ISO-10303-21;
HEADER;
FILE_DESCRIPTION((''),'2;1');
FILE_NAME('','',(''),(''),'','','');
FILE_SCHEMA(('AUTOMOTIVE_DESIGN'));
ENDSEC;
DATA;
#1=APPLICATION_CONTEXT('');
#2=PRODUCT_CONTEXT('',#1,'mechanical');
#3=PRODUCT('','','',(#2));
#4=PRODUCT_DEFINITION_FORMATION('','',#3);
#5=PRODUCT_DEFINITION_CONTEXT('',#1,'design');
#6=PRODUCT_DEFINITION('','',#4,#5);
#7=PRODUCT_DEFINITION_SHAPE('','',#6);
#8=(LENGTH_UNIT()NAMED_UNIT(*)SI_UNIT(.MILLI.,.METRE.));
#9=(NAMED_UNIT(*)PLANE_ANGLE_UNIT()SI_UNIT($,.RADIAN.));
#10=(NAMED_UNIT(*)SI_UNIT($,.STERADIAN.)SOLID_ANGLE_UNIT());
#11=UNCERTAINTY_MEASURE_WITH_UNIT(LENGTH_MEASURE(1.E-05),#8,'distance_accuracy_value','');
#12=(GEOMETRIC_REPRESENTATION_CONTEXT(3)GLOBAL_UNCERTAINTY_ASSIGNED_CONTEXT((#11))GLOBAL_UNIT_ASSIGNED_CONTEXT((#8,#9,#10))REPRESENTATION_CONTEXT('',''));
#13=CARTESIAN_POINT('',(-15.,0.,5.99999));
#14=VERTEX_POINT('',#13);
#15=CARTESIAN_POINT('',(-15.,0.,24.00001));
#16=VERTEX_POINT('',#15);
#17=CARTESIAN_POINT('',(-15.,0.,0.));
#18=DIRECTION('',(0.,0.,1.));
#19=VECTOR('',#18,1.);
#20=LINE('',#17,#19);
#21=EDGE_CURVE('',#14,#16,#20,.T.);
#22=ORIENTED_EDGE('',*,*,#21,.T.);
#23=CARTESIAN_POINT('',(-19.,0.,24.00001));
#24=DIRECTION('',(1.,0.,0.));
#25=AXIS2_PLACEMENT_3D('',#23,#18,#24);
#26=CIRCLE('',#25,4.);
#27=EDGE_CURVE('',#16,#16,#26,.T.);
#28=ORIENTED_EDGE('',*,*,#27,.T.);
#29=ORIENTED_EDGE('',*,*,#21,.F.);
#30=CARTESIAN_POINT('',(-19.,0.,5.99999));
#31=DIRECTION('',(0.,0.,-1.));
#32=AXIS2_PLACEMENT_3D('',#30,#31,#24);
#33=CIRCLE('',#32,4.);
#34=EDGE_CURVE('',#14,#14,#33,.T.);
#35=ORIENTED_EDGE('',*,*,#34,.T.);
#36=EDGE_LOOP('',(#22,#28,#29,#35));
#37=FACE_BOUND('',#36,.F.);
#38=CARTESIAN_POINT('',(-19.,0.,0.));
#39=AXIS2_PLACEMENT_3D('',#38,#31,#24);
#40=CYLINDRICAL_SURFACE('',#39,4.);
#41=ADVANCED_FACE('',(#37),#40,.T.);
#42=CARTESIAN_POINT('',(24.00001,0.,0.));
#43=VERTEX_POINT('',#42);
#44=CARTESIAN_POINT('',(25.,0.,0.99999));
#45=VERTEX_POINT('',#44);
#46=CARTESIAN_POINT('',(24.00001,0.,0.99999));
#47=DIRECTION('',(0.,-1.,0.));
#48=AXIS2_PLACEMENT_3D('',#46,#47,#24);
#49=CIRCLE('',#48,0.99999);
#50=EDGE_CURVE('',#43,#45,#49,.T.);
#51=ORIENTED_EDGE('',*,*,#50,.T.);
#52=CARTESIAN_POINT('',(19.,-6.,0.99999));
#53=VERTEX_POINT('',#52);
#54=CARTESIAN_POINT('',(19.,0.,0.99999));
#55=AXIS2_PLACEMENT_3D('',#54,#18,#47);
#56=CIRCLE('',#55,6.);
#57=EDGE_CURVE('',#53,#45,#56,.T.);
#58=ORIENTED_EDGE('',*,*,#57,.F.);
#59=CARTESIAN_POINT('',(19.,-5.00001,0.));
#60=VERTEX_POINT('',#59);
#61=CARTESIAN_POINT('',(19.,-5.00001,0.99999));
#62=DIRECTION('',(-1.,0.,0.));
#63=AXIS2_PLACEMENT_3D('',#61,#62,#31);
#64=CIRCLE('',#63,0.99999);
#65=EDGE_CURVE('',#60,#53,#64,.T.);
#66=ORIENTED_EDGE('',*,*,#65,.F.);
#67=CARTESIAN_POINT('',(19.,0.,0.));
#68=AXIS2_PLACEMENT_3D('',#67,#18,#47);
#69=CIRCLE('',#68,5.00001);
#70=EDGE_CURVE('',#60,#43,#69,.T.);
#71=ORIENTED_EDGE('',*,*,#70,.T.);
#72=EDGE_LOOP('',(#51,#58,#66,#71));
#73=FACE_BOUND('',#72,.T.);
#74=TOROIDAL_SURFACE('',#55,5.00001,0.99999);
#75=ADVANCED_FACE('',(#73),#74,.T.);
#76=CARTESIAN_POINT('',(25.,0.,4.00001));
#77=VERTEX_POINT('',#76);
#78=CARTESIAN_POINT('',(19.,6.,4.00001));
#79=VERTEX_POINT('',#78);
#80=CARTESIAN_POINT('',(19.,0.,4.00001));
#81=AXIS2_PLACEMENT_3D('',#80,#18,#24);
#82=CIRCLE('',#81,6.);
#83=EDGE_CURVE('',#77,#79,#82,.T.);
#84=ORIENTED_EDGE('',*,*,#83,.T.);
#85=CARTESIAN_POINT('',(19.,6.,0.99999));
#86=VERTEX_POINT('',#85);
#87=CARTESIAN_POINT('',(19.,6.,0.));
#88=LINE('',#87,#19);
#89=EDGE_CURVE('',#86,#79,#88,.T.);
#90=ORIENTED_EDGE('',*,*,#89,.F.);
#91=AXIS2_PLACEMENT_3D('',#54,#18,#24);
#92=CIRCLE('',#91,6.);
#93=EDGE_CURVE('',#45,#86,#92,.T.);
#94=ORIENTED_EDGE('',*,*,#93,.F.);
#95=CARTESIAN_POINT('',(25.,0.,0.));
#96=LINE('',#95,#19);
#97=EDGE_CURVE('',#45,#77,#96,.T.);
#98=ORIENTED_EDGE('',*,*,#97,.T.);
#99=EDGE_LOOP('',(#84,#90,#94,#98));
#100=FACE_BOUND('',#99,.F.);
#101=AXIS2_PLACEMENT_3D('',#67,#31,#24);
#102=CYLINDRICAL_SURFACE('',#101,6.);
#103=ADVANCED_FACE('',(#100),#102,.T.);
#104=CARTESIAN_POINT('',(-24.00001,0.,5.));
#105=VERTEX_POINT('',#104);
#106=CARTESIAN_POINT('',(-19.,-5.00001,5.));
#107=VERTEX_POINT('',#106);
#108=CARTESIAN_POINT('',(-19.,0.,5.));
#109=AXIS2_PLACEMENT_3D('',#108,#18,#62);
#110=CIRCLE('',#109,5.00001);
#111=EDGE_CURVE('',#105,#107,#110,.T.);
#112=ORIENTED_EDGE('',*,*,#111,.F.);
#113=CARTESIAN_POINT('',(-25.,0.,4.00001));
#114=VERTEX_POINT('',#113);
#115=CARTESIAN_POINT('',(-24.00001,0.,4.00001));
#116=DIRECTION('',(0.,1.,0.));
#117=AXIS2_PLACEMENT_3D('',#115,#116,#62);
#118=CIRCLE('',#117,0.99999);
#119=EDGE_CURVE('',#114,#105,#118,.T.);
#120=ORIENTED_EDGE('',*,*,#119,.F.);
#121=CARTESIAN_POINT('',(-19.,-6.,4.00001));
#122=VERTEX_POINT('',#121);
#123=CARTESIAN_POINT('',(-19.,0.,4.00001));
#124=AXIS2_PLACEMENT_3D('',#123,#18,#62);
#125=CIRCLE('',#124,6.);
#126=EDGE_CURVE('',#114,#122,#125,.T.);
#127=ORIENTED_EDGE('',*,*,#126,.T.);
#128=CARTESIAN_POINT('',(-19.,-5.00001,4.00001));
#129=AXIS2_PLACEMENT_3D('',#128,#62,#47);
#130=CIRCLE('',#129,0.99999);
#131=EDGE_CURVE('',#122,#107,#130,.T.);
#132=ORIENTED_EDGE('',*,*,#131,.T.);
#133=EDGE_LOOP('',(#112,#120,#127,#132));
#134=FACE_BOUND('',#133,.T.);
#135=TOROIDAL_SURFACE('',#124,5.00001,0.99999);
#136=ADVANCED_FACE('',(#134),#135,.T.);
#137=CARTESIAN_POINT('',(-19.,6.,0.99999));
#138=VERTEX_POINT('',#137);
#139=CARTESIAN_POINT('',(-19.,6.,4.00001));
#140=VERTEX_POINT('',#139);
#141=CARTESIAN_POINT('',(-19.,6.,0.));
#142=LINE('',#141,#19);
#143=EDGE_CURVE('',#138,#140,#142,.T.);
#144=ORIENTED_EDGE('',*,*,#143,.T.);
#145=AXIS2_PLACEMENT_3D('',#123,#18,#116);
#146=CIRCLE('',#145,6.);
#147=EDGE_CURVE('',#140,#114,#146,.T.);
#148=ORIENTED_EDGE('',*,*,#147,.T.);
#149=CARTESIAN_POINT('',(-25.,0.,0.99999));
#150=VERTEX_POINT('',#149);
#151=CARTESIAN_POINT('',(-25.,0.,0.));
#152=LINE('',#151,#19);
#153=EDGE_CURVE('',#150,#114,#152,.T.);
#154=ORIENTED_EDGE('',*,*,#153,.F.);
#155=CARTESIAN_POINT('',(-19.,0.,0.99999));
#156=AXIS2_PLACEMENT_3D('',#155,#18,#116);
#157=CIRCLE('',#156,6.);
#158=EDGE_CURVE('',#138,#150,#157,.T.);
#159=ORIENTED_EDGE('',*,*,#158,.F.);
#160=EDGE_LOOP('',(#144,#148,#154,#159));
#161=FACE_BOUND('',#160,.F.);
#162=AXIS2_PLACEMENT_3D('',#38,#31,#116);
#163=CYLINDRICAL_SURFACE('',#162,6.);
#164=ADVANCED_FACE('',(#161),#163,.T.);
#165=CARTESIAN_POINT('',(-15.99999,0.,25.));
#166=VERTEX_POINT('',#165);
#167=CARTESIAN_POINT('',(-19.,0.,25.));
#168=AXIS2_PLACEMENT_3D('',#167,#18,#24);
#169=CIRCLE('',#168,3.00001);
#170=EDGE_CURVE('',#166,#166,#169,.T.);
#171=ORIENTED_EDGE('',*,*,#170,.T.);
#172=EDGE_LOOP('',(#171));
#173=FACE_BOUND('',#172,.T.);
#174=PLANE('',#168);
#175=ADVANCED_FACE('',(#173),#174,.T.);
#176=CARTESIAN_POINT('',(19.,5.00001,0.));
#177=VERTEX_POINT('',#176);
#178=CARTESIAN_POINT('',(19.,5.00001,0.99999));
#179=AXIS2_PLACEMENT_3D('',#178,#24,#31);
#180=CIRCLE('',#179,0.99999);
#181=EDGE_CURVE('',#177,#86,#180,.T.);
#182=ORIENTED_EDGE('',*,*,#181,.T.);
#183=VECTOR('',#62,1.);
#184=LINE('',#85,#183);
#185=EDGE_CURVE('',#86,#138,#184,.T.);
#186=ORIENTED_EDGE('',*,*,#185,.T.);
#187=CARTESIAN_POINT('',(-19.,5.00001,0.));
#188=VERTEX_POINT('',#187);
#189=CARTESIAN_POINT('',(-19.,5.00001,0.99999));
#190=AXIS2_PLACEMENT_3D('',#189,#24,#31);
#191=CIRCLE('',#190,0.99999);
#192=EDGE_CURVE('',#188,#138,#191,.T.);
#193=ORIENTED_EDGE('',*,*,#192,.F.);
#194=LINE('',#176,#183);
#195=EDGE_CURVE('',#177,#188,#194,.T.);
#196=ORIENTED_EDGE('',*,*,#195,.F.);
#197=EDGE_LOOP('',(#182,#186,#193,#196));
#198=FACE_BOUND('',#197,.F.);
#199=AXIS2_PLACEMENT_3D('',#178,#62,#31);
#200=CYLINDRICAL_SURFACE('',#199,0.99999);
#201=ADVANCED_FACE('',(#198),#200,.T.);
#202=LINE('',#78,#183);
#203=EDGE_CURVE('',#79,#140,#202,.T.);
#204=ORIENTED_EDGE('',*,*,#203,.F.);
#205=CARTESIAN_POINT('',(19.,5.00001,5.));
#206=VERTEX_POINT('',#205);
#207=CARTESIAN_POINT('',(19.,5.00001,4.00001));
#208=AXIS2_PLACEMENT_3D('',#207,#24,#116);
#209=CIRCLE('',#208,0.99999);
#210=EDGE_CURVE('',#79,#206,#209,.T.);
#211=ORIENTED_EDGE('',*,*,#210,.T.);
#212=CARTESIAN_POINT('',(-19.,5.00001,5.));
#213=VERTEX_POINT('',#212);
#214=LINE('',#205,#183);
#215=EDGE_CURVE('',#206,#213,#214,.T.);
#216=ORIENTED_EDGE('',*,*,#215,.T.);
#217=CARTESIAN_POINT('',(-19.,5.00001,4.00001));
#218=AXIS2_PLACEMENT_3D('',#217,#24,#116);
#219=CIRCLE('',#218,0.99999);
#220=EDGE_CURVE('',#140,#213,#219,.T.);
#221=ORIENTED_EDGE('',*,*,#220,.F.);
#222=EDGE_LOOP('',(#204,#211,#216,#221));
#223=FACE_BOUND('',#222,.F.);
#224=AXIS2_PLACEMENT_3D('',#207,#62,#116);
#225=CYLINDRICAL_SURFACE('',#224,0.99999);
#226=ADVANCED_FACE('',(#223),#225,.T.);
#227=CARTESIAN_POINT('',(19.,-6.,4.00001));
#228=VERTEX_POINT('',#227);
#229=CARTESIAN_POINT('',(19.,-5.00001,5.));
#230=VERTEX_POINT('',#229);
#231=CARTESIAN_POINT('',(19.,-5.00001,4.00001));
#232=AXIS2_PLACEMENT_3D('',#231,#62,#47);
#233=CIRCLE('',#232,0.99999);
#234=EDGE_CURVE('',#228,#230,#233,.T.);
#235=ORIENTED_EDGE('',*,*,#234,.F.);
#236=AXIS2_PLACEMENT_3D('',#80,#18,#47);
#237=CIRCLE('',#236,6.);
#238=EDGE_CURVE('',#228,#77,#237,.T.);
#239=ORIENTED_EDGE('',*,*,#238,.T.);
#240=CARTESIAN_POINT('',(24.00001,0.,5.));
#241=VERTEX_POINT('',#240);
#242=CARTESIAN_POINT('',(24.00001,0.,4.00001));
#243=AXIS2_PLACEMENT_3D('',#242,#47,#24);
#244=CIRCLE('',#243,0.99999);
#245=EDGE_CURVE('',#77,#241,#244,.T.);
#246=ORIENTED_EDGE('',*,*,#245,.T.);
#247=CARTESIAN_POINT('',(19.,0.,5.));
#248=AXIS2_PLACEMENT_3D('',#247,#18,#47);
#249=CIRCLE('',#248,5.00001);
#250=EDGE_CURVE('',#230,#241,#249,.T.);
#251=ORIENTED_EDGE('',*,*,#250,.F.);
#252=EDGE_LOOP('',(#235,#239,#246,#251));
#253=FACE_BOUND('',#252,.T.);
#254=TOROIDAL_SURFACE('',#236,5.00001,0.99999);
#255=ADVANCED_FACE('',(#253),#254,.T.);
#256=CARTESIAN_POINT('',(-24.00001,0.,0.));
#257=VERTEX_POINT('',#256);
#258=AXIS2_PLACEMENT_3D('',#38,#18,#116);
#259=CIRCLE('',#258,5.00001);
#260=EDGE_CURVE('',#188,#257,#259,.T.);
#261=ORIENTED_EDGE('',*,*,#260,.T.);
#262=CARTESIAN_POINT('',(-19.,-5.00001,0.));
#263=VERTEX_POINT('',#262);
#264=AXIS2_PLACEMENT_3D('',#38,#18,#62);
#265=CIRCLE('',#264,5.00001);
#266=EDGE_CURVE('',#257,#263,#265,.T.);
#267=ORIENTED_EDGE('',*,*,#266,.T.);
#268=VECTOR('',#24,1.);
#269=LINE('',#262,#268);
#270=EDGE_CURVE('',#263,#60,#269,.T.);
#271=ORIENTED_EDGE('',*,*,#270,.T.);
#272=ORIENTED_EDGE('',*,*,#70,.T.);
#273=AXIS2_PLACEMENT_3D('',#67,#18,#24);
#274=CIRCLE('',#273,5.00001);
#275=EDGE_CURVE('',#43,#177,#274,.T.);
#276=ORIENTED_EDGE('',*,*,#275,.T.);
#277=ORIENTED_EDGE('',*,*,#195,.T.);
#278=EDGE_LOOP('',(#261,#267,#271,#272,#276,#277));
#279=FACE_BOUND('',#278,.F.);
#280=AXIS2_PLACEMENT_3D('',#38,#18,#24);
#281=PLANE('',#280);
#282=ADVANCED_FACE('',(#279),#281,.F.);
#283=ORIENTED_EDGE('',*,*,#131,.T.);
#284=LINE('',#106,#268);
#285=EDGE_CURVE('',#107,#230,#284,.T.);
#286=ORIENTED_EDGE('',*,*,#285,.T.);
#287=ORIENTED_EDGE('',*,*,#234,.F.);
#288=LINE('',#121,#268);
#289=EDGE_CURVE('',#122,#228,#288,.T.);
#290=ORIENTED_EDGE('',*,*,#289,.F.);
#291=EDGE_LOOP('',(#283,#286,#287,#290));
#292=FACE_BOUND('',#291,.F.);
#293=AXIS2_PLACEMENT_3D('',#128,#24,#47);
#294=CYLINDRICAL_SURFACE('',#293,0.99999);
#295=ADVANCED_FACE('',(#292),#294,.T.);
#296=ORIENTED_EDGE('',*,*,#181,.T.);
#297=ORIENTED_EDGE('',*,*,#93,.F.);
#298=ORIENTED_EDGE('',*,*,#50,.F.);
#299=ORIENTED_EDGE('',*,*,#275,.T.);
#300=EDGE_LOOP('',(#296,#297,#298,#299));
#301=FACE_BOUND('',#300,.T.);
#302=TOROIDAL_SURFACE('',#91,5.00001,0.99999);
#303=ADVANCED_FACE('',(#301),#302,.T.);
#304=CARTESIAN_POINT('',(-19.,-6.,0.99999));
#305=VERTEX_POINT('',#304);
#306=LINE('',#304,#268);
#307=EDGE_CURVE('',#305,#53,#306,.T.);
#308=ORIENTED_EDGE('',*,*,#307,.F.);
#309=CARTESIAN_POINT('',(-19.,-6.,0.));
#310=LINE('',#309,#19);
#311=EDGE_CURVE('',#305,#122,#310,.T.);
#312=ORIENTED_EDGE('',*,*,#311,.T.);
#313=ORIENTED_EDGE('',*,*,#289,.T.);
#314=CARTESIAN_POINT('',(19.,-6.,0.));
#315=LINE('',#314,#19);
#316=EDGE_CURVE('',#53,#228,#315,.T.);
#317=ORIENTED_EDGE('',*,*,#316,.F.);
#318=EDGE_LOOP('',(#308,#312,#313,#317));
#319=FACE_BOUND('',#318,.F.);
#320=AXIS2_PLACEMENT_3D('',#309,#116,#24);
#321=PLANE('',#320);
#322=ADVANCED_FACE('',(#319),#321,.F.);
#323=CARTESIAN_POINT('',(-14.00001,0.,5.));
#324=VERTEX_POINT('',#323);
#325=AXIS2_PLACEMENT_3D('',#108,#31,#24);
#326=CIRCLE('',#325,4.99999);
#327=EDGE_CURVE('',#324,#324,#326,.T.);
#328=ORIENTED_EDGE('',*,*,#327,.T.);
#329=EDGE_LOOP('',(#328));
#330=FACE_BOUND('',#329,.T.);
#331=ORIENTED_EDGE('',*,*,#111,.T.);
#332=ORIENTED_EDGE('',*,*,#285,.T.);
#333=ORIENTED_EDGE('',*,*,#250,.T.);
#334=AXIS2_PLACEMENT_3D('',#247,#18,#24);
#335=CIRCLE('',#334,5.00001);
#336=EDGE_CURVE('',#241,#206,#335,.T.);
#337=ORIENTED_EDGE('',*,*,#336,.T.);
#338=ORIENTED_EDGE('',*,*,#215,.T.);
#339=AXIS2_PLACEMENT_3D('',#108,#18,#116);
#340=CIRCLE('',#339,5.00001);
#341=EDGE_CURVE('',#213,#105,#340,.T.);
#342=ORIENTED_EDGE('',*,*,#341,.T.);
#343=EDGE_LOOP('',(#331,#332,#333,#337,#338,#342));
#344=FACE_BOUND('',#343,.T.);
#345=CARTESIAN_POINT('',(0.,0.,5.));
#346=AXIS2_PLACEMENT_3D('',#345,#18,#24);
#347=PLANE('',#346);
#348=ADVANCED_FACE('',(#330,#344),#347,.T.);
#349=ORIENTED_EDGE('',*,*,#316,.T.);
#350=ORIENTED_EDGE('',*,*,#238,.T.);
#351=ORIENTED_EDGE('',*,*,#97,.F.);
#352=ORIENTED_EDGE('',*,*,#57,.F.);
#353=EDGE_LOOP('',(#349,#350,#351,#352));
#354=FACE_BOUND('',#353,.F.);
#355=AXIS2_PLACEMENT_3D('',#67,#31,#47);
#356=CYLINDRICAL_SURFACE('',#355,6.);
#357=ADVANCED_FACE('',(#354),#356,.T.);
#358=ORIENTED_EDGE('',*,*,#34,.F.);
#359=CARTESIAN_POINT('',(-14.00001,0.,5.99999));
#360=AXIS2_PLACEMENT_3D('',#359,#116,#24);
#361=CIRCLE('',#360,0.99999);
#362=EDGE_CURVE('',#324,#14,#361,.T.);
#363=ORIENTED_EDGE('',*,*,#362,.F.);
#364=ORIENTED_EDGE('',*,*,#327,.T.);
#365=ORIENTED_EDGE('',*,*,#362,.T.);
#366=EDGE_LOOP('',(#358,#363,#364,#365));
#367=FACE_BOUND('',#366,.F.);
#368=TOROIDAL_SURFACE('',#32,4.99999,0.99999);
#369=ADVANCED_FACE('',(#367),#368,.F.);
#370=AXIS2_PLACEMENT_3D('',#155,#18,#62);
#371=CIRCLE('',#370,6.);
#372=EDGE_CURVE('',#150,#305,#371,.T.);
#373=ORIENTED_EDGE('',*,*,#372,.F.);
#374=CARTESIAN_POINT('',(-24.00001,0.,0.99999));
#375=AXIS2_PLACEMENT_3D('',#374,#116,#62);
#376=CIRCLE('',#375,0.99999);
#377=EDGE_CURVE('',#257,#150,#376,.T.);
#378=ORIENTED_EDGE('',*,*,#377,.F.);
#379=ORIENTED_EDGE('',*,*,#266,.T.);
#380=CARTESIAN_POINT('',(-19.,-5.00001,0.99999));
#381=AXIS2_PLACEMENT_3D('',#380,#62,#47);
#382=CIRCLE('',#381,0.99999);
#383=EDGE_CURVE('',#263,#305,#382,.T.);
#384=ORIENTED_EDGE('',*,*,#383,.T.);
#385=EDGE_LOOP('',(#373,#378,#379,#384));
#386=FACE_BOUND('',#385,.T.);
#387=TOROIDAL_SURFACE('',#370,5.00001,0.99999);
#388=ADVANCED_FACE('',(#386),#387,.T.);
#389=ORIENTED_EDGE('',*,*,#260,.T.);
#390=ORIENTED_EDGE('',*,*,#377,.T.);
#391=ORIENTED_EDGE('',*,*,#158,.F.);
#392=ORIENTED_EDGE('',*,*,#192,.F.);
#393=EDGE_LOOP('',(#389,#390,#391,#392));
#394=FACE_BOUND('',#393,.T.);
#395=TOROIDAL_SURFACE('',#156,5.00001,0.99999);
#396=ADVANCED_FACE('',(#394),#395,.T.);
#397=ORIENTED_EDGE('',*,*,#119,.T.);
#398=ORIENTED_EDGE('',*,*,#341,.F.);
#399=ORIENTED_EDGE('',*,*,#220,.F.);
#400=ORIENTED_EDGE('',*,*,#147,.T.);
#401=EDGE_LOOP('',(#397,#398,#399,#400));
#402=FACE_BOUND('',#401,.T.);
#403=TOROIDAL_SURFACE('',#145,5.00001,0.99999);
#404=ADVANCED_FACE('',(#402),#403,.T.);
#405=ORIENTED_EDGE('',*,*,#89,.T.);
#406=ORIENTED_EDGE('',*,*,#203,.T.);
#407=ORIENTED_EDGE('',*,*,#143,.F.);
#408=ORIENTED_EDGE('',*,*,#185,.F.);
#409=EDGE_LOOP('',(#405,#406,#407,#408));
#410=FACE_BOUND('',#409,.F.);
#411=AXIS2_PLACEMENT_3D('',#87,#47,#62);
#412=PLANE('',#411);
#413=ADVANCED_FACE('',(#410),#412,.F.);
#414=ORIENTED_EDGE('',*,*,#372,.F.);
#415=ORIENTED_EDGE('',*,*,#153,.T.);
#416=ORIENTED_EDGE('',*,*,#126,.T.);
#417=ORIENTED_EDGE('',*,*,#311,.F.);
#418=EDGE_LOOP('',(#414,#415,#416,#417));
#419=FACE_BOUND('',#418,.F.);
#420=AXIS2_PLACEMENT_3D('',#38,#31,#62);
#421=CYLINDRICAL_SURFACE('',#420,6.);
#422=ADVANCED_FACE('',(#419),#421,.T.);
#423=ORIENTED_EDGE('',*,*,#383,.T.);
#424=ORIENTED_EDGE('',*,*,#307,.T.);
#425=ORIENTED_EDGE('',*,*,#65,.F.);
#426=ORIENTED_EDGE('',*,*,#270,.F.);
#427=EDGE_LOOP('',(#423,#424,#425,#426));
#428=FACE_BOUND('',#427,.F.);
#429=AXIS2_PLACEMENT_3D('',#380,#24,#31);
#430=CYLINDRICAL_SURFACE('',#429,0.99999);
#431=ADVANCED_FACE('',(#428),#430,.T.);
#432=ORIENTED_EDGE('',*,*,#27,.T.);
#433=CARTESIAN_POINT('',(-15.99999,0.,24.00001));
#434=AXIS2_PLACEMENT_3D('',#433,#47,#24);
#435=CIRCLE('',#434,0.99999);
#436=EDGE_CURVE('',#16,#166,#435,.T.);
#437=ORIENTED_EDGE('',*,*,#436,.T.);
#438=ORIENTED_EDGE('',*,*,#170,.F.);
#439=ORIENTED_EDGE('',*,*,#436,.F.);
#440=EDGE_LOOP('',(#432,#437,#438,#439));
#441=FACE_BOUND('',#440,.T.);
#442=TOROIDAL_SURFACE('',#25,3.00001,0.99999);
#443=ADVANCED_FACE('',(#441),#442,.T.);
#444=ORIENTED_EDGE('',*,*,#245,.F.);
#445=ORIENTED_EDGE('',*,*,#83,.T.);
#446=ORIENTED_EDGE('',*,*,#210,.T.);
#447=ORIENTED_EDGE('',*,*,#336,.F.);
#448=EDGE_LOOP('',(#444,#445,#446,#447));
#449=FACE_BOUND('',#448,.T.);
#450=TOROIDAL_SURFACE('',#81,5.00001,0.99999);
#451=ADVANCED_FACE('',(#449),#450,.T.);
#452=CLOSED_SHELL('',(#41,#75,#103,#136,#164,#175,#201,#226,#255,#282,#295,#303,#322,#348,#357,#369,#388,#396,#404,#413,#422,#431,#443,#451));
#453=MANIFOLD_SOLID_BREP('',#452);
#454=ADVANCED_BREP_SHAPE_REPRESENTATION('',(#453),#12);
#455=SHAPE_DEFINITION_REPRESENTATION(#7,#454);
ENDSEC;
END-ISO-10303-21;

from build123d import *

# Parameters (mm, degrees)
F0_R     = 4
F1_DEPTH = 5
F2_DEPTH = 25
F3_R     = 0.99999


# Not quite as in the source:
# - a fillet or chamfer is up to 0.001 mm smaller than in the source, because OpenCascade refuses the exact size


with BuildPart() as f1:
    # F0 (on Top) → F1 (new body)
    with BuildSketch(Plane.XY):
        with BuildLine():
            ThreePointArc((25, 0), (23.2426406871, 4.2426406871), (19, 6))
            Line((19, 6), (-19, 6))
            ThreePointArc((-19, 6), (-23.2426406871, 4.2426406871), (-25, 0))
            ThreePointArc((-25, 0), (-23.2426406871, -4.2426406871), (-19, -6))
            Line((-19, -6), (19, -6))
            ThreePointArc((19, -6), (23.2426406871, -4.2426406871), (25, 0))
        make_face()
        with Locations((-19, 0)):
            Circle(F0_R, mode=Mode.SUBTRACT)
        with Locations((19, 0)):
            Circle(F0_R, mode=Mode.SUBTRACT)
        with Locations((-19, 0)):
            Circle(F0_R)
        with Locations((19, 0)):
            Circle(F0_R)
    extrude(amount=F1_DEPTH)

    # F0 (on Top) → F2 (join)
    with BuildSketch(Plane.XY):
        with Locations((-19, 0)):
            Circle(F0_R)
    extrude(amount=F2_DEPTH)

    # F3 (radius 1 in the source; OpenCascade refuses exactly that, so slightly less here)
    f3_edges = [f1.edges().sort_by_distance(p)[0] for p in [
        (0, 6, 5),
        (0, 6, 0),
        (-23, 0, 5),
        (-23, 0, 25),
    ]]
    fillet(f3_edges, radius=F3_R)


solid = f1.part
